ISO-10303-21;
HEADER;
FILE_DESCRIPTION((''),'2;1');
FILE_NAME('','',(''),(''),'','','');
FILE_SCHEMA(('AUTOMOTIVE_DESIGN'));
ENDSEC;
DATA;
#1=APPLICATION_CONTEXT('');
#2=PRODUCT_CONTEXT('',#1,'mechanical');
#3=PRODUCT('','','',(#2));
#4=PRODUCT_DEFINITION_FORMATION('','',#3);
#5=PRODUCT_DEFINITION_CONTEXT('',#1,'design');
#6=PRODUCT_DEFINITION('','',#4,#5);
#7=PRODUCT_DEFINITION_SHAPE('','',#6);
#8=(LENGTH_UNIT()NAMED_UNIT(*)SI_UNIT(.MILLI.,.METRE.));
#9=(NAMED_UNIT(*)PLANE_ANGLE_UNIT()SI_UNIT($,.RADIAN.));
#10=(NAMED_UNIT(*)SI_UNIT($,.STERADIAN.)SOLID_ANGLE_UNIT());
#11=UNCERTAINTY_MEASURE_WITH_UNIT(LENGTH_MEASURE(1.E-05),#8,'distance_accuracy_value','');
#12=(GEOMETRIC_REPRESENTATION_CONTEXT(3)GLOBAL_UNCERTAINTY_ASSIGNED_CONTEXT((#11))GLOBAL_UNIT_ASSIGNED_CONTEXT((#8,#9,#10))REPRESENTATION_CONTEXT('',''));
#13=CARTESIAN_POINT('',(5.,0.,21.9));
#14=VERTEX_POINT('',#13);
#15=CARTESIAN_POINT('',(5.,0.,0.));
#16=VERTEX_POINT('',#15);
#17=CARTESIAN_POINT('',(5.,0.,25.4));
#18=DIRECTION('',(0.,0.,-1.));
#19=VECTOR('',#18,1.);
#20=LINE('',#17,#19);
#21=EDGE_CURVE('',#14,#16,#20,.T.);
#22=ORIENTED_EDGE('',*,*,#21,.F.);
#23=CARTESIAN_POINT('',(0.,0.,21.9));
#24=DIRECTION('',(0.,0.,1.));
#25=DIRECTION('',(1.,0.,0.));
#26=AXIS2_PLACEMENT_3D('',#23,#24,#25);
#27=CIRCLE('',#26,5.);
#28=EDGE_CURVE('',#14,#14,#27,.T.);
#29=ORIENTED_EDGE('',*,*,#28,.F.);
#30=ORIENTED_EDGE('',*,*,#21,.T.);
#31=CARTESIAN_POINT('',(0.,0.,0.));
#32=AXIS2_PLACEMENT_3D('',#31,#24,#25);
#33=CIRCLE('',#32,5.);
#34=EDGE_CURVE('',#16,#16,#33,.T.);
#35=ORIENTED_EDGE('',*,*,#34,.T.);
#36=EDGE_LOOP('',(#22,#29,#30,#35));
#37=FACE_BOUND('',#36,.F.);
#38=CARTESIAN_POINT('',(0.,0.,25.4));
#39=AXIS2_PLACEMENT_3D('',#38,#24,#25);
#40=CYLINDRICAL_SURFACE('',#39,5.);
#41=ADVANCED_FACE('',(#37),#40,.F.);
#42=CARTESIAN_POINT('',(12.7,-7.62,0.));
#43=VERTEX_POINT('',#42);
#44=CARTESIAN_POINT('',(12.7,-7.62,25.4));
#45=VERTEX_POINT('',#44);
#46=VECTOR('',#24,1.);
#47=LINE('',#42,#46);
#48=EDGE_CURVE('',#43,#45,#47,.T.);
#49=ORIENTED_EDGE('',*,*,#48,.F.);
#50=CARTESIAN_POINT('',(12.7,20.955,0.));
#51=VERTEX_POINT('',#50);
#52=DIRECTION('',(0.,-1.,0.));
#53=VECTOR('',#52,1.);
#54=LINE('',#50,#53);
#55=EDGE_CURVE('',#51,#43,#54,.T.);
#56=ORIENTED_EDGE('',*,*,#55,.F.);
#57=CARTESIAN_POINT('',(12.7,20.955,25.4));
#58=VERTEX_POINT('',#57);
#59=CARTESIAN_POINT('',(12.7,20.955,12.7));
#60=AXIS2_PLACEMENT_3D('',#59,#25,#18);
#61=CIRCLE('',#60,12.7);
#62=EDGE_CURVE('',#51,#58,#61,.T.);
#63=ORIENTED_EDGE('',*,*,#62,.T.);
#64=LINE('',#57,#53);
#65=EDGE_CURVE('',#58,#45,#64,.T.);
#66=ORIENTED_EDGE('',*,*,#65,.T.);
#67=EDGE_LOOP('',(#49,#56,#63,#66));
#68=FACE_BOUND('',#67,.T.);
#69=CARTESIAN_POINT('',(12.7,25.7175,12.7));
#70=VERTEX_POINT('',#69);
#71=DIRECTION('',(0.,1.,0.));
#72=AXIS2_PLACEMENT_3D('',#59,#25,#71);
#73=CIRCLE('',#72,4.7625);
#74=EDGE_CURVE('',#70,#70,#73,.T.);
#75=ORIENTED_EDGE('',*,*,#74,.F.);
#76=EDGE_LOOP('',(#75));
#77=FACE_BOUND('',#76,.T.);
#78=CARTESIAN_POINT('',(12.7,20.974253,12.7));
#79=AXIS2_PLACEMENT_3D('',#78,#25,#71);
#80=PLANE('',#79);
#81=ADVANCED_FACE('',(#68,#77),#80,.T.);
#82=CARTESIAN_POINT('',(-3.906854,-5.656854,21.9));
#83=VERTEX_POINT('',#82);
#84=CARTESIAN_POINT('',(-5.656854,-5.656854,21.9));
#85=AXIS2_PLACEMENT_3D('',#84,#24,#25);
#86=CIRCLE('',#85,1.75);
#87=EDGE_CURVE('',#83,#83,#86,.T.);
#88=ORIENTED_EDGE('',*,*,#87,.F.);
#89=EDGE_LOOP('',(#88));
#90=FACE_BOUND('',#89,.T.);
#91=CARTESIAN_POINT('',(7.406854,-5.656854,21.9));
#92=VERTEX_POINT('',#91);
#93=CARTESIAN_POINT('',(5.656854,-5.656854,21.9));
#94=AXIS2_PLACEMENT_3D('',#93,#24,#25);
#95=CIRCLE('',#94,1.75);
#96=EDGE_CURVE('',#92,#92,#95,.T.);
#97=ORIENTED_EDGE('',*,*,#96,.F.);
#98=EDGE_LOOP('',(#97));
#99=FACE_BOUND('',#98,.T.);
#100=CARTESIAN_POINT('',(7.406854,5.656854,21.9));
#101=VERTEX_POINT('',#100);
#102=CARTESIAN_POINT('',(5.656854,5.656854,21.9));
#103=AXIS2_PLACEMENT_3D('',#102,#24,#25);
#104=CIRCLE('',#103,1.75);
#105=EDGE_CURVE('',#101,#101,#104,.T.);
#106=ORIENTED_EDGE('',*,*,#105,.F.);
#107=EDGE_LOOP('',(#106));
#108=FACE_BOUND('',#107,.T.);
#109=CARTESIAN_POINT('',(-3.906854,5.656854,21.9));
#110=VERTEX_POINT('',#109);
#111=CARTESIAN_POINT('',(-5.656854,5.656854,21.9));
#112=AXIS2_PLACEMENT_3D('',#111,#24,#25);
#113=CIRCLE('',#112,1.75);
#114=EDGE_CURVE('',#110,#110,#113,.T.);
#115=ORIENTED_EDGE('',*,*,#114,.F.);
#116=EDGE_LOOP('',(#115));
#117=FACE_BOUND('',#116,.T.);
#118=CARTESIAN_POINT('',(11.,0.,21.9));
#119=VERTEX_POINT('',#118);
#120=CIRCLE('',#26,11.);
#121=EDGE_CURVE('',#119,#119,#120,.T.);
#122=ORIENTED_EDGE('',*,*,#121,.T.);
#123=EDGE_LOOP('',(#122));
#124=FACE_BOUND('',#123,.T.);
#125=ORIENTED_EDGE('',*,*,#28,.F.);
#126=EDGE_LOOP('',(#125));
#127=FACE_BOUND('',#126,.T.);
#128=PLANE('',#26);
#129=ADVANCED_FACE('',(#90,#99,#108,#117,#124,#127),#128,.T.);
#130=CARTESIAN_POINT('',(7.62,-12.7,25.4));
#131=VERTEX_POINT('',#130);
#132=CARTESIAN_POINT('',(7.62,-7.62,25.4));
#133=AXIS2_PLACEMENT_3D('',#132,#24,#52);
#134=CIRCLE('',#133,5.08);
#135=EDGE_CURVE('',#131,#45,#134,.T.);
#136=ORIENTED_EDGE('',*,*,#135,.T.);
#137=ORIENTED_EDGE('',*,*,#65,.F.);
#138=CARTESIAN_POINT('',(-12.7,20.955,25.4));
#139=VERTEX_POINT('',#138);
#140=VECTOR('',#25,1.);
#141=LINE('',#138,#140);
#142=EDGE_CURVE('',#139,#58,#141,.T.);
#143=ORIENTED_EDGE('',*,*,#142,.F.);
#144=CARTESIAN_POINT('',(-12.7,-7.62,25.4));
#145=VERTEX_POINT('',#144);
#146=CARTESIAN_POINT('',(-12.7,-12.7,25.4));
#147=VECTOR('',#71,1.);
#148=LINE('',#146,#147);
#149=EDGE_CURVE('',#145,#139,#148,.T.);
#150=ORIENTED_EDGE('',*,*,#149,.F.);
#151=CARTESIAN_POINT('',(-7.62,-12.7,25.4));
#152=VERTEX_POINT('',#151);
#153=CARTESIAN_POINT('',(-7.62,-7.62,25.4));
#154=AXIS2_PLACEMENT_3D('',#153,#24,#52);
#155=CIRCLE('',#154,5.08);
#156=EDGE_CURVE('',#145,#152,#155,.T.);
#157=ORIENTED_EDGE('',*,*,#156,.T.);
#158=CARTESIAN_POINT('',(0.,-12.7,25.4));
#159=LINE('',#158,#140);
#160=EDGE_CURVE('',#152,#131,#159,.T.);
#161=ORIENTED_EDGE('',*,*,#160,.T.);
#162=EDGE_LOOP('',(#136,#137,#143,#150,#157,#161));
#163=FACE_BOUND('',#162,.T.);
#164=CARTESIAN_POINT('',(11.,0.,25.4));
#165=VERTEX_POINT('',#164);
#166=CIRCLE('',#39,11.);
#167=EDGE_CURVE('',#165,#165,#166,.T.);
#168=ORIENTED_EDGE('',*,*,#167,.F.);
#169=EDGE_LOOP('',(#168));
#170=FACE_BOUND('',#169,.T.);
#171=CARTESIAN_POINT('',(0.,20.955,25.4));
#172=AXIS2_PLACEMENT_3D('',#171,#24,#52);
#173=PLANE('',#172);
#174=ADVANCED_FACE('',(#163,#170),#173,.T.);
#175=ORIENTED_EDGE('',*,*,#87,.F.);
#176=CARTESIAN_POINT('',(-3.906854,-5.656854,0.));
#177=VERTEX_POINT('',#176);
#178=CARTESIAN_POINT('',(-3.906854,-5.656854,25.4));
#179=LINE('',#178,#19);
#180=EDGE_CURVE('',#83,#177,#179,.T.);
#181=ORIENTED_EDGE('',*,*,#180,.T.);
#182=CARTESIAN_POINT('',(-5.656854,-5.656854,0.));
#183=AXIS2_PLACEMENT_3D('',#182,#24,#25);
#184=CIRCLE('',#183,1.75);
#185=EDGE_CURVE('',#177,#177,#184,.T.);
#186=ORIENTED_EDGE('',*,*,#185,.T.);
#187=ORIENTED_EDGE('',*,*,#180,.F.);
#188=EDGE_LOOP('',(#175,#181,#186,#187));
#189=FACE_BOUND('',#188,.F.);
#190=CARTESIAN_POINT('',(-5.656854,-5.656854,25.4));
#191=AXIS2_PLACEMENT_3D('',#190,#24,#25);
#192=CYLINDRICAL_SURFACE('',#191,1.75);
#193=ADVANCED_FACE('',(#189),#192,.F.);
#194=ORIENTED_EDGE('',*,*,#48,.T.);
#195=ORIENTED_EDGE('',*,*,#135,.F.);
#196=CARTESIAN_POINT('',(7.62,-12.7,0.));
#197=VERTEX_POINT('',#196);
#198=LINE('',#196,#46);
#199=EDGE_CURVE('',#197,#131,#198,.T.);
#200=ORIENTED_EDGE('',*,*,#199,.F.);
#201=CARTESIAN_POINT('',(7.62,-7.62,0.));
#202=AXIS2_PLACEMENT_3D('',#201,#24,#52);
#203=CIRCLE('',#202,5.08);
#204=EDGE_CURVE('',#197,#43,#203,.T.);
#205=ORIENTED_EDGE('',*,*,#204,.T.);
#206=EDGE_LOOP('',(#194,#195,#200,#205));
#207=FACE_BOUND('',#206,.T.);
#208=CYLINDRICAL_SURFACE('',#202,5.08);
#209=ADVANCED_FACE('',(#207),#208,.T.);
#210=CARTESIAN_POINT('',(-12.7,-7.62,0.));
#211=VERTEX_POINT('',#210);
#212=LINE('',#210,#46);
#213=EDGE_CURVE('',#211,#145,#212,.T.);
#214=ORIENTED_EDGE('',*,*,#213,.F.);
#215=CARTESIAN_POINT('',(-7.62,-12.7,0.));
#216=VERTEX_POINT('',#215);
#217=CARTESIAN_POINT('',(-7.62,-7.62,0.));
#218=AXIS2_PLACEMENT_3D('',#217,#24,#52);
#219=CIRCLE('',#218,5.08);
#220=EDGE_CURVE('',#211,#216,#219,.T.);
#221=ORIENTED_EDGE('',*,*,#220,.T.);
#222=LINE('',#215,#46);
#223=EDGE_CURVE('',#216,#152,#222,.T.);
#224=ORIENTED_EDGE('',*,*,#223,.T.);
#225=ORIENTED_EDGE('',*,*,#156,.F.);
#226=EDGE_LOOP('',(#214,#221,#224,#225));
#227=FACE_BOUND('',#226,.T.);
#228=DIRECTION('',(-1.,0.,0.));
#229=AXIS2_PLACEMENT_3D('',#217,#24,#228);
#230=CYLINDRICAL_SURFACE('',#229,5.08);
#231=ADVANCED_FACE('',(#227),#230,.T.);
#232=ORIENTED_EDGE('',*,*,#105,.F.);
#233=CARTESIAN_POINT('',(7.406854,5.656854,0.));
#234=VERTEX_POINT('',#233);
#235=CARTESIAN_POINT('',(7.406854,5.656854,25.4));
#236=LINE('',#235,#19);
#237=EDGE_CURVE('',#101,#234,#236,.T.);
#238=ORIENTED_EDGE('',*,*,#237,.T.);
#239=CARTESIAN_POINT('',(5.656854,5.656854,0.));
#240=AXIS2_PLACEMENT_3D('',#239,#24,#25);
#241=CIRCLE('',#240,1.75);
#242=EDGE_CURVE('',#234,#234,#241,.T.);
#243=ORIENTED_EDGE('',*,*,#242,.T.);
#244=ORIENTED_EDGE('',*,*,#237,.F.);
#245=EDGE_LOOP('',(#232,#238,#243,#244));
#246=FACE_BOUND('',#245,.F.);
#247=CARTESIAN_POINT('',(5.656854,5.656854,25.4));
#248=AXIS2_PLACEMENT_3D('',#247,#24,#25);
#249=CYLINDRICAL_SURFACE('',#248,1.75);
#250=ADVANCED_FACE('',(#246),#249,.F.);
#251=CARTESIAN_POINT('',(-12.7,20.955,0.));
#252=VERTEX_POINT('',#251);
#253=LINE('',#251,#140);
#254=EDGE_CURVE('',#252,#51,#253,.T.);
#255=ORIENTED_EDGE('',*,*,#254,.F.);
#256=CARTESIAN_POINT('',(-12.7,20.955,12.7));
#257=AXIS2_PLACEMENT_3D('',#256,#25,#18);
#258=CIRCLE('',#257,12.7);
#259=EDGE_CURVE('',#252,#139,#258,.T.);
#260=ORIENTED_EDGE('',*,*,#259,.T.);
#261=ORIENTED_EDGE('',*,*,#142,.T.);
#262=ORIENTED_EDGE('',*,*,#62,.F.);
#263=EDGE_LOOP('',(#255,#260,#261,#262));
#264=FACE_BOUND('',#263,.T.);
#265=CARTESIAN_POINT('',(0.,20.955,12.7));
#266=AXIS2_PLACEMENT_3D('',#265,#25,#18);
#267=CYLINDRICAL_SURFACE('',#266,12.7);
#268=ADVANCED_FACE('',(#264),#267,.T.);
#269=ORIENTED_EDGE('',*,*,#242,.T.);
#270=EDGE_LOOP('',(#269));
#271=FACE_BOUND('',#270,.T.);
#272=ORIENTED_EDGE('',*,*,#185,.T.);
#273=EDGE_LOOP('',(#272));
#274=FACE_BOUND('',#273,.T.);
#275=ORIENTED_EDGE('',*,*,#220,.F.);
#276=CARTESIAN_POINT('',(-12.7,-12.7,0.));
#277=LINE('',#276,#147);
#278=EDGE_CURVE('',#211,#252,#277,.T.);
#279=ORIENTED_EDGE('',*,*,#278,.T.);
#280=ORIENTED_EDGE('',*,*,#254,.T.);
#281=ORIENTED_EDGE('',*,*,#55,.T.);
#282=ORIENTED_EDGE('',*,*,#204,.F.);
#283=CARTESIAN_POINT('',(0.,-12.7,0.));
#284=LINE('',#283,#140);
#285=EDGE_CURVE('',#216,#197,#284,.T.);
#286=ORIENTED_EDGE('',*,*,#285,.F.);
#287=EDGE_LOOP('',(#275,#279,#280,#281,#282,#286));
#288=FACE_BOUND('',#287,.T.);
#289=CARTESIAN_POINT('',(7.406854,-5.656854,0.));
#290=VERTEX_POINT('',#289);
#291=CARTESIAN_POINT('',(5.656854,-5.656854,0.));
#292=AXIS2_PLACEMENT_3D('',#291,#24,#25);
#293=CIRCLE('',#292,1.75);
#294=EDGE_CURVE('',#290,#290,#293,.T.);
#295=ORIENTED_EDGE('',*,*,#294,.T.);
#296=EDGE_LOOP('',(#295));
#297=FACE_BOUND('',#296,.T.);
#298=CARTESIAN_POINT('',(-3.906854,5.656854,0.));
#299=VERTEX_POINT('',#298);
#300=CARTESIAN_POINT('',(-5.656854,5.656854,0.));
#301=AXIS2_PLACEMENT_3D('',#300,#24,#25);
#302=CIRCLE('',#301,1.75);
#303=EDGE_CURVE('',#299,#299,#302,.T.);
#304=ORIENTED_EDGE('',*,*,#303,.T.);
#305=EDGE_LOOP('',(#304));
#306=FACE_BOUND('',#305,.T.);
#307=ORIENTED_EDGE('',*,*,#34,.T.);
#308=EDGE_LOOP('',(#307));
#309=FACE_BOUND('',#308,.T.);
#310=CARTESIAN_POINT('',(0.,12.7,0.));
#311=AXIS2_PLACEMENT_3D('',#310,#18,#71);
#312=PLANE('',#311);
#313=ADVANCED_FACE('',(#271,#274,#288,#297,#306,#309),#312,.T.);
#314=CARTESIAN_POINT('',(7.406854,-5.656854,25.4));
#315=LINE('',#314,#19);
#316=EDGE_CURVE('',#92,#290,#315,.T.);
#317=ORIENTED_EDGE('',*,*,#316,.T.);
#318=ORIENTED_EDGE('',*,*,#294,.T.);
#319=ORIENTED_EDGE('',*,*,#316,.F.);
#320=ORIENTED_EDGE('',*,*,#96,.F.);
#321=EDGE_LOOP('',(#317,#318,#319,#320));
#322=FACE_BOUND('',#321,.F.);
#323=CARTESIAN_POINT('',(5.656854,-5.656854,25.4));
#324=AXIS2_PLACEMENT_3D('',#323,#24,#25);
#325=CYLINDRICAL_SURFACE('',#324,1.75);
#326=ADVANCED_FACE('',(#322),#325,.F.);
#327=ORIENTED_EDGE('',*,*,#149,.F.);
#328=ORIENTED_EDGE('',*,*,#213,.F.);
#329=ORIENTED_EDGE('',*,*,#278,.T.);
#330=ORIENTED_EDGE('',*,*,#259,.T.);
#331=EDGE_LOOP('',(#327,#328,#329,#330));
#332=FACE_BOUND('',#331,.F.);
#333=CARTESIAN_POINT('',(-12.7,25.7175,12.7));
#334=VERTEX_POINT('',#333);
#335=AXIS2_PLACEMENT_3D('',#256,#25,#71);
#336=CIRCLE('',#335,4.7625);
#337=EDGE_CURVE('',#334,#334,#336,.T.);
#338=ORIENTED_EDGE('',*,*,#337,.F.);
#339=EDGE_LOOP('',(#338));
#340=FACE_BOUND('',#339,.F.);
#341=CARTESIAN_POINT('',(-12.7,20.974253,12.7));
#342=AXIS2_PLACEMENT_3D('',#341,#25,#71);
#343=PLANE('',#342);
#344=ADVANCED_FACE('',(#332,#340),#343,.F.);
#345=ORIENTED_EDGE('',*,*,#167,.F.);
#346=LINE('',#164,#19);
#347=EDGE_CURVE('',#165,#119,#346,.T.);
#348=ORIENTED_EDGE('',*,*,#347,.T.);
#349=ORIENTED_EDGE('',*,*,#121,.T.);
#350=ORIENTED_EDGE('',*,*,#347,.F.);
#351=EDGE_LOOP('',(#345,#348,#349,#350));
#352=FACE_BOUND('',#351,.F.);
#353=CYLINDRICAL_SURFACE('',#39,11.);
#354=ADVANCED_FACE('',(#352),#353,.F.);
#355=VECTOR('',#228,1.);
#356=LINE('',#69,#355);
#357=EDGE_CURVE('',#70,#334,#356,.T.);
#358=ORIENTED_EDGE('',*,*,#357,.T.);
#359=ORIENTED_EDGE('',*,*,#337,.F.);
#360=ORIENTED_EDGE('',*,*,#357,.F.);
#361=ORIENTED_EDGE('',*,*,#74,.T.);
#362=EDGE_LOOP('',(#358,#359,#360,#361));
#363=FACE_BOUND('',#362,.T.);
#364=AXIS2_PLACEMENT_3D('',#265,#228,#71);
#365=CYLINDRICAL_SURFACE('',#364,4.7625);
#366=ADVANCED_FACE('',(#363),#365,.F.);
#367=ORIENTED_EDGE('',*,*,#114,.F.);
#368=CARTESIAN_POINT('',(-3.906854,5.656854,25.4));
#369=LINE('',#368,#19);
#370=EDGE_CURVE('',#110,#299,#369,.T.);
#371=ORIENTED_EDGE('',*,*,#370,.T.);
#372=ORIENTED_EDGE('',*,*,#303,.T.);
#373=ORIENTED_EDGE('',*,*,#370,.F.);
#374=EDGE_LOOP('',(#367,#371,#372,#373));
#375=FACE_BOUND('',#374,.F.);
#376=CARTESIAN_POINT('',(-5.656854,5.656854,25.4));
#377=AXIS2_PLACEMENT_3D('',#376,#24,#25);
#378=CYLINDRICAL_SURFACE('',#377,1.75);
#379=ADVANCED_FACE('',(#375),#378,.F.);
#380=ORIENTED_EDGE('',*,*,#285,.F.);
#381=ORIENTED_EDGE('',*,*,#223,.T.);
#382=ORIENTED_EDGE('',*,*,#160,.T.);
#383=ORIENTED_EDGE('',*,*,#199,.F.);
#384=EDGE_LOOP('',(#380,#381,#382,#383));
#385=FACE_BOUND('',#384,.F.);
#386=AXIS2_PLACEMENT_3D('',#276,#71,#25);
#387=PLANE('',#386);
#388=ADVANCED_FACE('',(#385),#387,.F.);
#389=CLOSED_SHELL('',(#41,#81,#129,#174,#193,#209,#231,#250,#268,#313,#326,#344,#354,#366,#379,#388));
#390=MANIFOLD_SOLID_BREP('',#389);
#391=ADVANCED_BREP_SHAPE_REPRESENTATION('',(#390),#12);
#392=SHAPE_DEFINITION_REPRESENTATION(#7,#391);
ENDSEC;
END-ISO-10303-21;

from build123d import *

# Parameters (mm, degrees)
F0_W          = 25.4
F0_H          = 25.4
F1_DEPTH      = 25.4
F2_R          = 4.7625
F3_DEPTH      = 12.7
F3_DEPTH_BACK = 12.7
F4_R          = 5.08
F5_R          = 5
F5_R_2        = 1.75
F6_DEPTH      = 25.401
F7_R          = 11
F8_DEPTH      = 3.5


with BuildPart() as f1:
    # F0 (on Top) → F1 (new body)
    with BuildSketch(Plane.XY):
        Rectangle(F0_W, F0_H)
    extrude(amount=F1_DEPTH)

    # F2 (on Right) → F3 (join, two sides)
    with BuildSketch(Plane.YZ) as f3_sk:
        with BuildLine():
            Line((12.7, 0), (20.955, 0))
            ThreePointArc((20.955, 0), (33.655, 12.7), (20.955, 25.4))
            Line((20.955, 25.4), (12.7, 25.4))
            Line((12.7, 25.4), (12.7, 0))
        make_face()
        with Locations((20.955, 12.7)):
            Circle(F2_R, mode=Mode.SUBTRACT)
    extrude(amount=F3_DEPTH)
    extrude(f3_sk.sketch, amount=-F3_DEPTH_BACK)

    # F4
    f4_edges = [f1.edges().sort_by_distance(p)[0] for p in [
        (12.7, -12.7, 12.7),
        (-12.7, -12.7, 12.7),
    ]]
    fillet(f4_edges, radius=F4_R)

    # F5 (on face) → F6 (cut, through all)
    with BuildSketch(Plane.XY.offset(25.4)):
        Circle(F5_R)
        with Locations((-5.6568542495, 5.6568542495)):
            Circle(F5_R_2)
        with Locations((5.6568542495, 5.6568542495)):
            Circle(F5_R_2)
        with BuildLine():
            ThreePointArc((3.9068542495, -5.6568542495), (5.6568542495, -7.4068542495), (7.4068542495, -5.6568542495))
            ThreePointArc((7.4068542495, -5.6568542495), (5.6568542495, -3.9068542495), (3.9068542495, -5.6568542495))
        make_face()
        with Locations((-5.6568542495, -5.6568542495)):
            Circle(F5_R_2)
    extrude(amount=-F6_DEPTH, mode=Mode.SUBTRACT)

    # F7 (on face) → F8 (cut)
    with BuildSketch(Plane.XY.offset(25.4)):
        Circle(F7_R)
    extrude(amount=-F8_DEPTH, mode=Mode.SUBTRACT)


solid = f1.part
